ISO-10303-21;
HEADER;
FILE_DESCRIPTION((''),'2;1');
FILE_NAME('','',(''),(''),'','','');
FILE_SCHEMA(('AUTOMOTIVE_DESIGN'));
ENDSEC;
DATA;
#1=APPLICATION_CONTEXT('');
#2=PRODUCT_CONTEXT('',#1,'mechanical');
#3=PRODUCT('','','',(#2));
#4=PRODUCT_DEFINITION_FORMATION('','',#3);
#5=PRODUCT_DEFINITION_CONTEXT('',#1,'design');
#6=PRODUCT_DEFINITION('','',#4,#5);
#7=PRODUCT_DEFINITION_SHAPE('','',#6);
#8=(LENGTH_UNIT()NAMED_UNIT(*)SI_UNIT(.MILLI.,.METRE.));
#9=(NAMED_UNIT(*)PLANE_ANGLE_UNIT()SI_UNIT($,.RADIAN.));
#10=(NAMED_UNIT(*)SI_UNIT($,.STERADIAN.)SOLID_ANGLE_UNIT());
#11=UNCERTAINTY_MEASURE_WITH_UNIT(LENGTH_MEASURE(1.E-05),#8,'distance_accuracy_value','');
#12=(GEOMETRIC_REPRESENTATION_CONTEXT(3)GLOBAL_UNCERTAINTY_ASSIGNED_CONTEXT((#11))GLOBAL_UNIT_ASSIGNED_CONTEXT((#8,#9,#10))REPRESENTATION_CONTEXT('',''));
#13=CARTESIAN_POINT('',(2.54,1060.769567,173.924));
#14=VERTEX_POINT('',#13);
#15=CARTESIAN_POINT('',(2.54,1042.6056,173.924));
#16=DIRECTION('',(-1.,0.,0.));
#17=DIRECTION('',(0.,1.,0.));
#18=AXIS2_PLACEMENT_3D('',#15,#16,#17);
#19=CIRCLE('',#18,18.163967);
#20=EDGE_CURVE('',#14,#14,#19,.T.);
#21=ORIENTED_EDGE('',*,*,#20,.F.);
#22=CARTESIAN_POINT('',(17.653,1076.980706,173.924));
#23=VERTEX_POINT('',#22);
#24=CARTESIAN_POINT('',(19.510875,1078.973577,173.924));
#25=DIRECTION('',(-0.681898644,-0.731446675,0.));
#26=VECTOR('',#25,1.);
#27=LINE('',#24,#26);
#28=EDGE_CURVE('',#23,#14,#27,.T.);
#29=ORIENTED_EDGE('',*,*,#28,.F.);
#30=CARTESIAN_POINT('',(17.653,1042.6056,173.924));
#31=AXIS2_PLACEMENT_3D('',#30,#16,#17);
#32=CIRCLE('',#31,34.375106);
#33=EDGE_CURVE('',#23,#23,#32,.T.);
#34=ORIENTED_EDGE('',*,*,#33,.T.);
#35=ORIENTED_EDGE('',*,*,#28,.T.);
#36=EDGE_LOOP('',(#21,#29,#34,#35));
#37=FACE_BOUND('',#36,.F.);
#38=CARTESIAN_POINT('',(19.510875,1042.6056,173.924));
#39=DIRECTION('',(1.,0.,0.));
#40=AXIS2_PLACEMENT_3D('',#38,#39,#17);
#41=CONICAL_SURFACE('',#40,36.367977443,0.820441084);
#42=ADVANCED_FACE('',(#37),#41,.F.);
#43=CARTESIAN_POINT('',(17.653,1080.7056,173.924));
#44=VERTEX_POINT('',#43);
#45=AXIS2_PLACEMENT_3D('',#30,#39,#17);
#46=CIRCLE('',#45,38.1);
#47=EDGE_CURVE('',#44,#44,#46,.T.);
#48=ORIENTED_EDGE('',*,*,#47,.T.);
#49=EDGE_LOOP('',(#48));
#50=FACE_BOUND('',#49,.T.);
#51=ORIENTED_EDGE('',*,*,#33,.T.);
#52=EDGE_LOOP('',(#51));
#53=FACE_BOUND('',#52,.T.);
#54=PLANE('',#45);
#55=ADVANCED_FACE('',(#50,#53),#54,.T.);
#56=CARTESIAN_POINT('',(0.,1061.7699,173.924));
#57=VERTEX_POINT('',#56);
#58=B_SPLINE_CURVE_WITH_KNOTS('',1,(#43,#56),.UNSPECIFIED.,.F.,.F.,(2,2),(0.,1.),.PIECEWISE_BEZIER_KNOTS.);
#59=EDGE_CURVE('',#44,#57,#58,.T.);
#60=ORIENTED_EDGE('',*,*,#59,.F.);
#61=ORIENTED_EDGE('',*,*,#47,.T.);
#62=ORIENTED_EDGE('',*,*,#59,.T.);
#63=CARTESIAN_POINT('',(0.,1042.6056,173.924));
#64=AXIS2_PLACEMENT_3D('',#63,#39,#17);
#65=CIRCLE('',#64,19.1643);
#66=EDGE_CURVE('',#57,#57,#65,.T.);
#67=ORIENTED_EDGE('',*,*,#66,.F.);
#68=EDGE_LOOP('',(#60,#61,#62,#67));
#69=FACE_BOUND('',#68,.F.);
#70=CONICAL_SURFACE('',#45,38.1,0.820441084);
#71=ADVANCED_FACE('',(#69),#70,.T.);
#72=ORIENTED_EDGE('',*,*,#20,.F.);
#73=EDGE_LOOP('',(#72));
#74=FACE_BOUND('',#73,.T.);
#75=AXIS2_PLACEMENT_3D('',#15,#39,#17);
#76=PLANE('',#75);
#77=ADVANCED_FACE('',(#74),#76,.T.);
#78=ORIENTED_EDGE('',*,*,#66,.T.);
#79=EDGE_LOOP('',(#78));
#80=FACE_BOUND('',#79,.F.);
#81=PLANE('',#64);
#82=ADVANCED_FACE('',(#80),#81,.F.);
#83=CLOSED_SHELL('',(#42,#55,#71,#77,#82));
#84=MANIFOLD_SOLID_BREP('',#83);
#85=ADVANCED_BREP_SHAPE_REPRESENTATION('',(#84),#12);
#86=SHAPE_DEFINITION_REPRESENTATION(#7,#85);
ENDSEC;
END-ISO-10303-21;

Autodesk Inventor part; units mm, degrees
ref_plane "XZ Plane" through (0, 0, 0) normal (0, 1, 0) x (-1, 0, 0)
ref_plane "XY Plane" through (0, 0, 0) normal (0, 0, 1) x (1, 0, 0)
sketch "Sketch1" plane through (0, 0, 0) normal (1, 0, 0) x (0, 1, 0)
  line L0 (920.75, 0) -> (0, 0)
  line L1 (0, 0) -> (920.75, 0)
  line L2 (-297.6389, 409.8513) -> (2710.7909, 409.8513) construction
  line L3 (2710.7909, 409.8513) -> (2710.7909, -1716.9746) construction
  line L4 (2710.7909, -1716.9746) -> (-297.6389, -1716.9746) construction
  line L5 (-297.6389, -1716.9746) -> (-297.6389, 409.8513) construction
  line L6 (0, 0) -> (920.75, 0)
  line L7 (920.75, 0) -> (920.75, 100.33)
  line L8 (0, 100.33) -> (920.75, 100.33)
  line L9 (0, 0) -> (0, 100.33)
  line L10 (0, 100.33) -> (0, 120.65)
  line L11 (0, 120.65) -> (920.75, 120.65)
  line L12 (920.75, 120.65) -> (920.75, 100.33)
  line L13 (0, 120.65) -> (0, 196.85)
  line L14 (477.9962, 0) -> (477.9962, -13.97)
  line L15 (477.9962, -13.97) -> (434.8162, -13.97)
  line L16 (434.8162, -13.97) -> (434.8162, 0)
  line L17 (133.294, 0) -> (133.294, -13.97)
  line L18 (133.294, -13.97) -> (90.114, -13.97)
  line L19 (90.114, -13.97) -> (90.114, 0)
  line L20 (769.0257, 0) -> (769.0257, -13.97)
  line L21 (769.0257, -13.97) -> (812.2057, -13.97)
  line L22 (812.2057, -13.97) -> (812.2057, 0)
  line L23 (434.8162, -13.97) -> (477.9962, -13.97)
  line L24 (769.0257, -13.97) -> (812.2057, -13.97)
  line L25 (90.114, -13.97) -> (133.294, -13.97)
  line L26 (90.114, -13.97) -> (111.704, -13.97)
  line L27 (111.704, -13.97) -> (100.909, -13.97)
  line L28 (100.909, -13.97) -> (122.499, -13.97)
  line L29 (122.499, -13.97) -> (122.499, -33.02)
  line L30 (122.499, -33.02) -> (100.909, -33.02)
  line L31 (100.909, -33.02) -> (100.909, -13.97)
  line L32 (434.8162, -13.97) -> (456.4062, -13.97)
  line L33 (456.4062, -13.97) -> (445.6112, -13.97)
  line L34 (445.6112, -13.97) -> (467.2012, -13.97)
  line L35 (467.2012, -13.97) -> (467.2012, -33.02)
  line L36 (467.2012, -33.02) -> (445.6112, -33.02)
  line L37 (445.6112, -33.02) -> (445.6112, -13.97)
  line L38 (769.0257, -13.97) -> (790.6157, -13.97)
  line L39 (790.6157, -13.97) -> (779.8207, -13.97)
  line L40 (779.8207, -13.97) -> (801.4107, -13.97)
  line L41 (801.4107, -13.97) -> (801.4107, -33.02)
  line L42 (801.4107, -33.02) -> (779.8207, -33.02)
  line L43 (779.8207, -33.02) -> (779.8207, -13.97)
  line L44 (434.8162, 0) -> (413.2262, 0)
  line L45 (413.2262, 0) -> (413.2262, -11.43)
  line L46 (413.2262, -11.43) -> (371.9512, -11.43)
  line L47 (371.9512, -11.43) -> (371.9512, 64.77)
  arc A0 (413.2262, 72.0379) -> (371.9512, 72.0379) centre (392.5887, 68.404) ccw
  line L48 (413.2262, 0) -> (413.2262, 64.77)
  line L49 (371.9512, 64.77) -> (371.9512, 72.0379)
  line L50 (413.2262, 64.77) -> (413.2262, 72.0379)
  line L51 (434.8162, -13.97) -> (434.8162, 202.565)
  line L52 (477.9962, -13.97) -> (477.9962, 202.565)
  line L53 (769.0257, -13.97) -> (769.0257, 202.565)
  line L54 (812.2057, -13.97) -> (812.2057, 202.565)
  line L55 (812.2057, 202.565) -> (769.0257, 202.565)
  line L56 (477.9962, 202.565) -> (434.8162, 202.565)
  line L57 (133.294, -13.97) -> (133.294, 182.245)
  line L58 (90.114, -13.97) -> (90.114, 182.245)
  line L59 (90.114, 182.245) -> (133.294, 182.245)
  line L60 (67.3834, 182.245) -> (164.6776, 182.245)
  line L61 (413.2262, 202.565) -> (508.4774, 202.565)
  line L62 (745.5808, 202.565) -> (847.3717, 202.565)
  line L63 (67.3834, 161.925) -> (164.6776, 161.925)
  line L64 (413.2262, 182.245) -> (508.4774, 182.245)
  line L65 (745.5808, 182.245) -> (847.3717, 182.245)
  line L66 (133.294, -13.97) -> (133.294, 78.74)
  line L67 (133.294, 78.74) -> (434.8162, 78.74)
  line L68 (133.294, -13.97) -> (133.294, 26.67)
  line L69 (133.294, 26.67) -> (371.9512, 26.67)
  line L70 (133.294, 26.67) -> (298.394, 26.67)
  line L71 (298.394, 26.67) -> (317.7759, 78.74)
  line L72 (133.294, 78.74) -> (133.294, 59.055)
  line L73 (133.294, 59.055) -> (310.4486, 59.055)
  line L74 (905.6652, 120.65) -> (905.6652, 196.85)
  line L75 (905.6652, 120.65) -> (936.6408, 153.8672)
  line L76 (905.6652, 196.85) -> (940.9781, 158.9816)
  line L77 (905.6652, 158.75) -> (923.3216, 158.75)
  line L78 (923.3216, 158.75) -> (923.3216, 177.9158)
  line L79 (923.3216, 158.75) -> (923.3216, 139.5842)
  circle A1 centre (1042.6056, 173.924) radius 19.1643
  dimension "d0" = 920.75
  dimension "d1" = 20.32
  dimension "d2" = 76.2
  dimension "d3" = 13.97
  dimension "d4" = 43.18
  dimension "d5" = 13.97
  dimension "d6" = 43.18
  dimension "d7" = 13.97
  dimension "d8" = 13.97
  dimension "d9" = 43.18
  dimension "d10" = 21.59
  dimension "d11" = 19.05
  dimension "d12" = 21.59
  dimension "d13" = 19.05
  dimension "d14" = 21.59
  dimension "d15" = 19.05
  dimension "d16" = 21.59
  dimension "d17" = 11.43
  dimension "d18" = 41.275
  dimension "d19" = 76.2
  dimension "d20" = 20.955
  dimension "d21" = 216.535
  dimension "d22" = 216.535
  dimension "d23" = 216.535
  dimension "d24" = 216.535
  dimension "d25" = 196.215
  dimension "d26" = 20.32
  dimension "d27" = 20.32
  dimension "d28" = 20.32
  dimension "d29" = 92.71
  dimension "d30" = 40.64
  dimension "d31" = 165.1
  dimension "d32" = 19.685
  dimension "d35" = 76.2
  dimension "d36" = 43
  dimension "d37" = 43
  dimension "d38" = 38.3316
  dimension "d39" = 38.3286
ref_plane "Work Plane1" through (17.653, 0, 0) normal (1, 0, 0) x (0, 1, 0)
sketch "Sketch2" plane through (17.653, 0, 0) normal (1, 0, 0) x (0, 1, 0)
  circle A0 centre (1042.6056, 173.924) radius 19.1643 projected
  circle A1 centre (1042.6056, 173.924) radius 38.1
  point P0 (0, 0)
  dimension "d41" = 76.2
loft "Loft1" add profiles "Sketch2", "Sketch1" contours A0 | A1 / A1
shell "Shell1" thickness 2.54 removed faces 1 at (17.653, 1030.2684, 183.3553)
sketch "Sketch3" plane through (17.653, 1042.6056, 173.924) normal (1, 0, 0) x (0, 0, -1)
  circle A0 centre (0, 0) radius 38.1 projected
  line L0 (-38.1, 0) -> (38.1, 0)
  point P0 (173.924, -1042.6056)
  dimension "d47" = 76.2
sketch "Sketch4" plane through (0, 0, 0) normal (0, 0, 1) x (1, 0, 0)
  line L0 (17.653, 1080.7056) -> (17.653, 1004.5056) projected
  line L1 (0, 1023.4413) -> (0, 1061.7699) projected
  point P0 (0, 0)
  dimension "d48" = 17.653
properties part number "end cap B"
